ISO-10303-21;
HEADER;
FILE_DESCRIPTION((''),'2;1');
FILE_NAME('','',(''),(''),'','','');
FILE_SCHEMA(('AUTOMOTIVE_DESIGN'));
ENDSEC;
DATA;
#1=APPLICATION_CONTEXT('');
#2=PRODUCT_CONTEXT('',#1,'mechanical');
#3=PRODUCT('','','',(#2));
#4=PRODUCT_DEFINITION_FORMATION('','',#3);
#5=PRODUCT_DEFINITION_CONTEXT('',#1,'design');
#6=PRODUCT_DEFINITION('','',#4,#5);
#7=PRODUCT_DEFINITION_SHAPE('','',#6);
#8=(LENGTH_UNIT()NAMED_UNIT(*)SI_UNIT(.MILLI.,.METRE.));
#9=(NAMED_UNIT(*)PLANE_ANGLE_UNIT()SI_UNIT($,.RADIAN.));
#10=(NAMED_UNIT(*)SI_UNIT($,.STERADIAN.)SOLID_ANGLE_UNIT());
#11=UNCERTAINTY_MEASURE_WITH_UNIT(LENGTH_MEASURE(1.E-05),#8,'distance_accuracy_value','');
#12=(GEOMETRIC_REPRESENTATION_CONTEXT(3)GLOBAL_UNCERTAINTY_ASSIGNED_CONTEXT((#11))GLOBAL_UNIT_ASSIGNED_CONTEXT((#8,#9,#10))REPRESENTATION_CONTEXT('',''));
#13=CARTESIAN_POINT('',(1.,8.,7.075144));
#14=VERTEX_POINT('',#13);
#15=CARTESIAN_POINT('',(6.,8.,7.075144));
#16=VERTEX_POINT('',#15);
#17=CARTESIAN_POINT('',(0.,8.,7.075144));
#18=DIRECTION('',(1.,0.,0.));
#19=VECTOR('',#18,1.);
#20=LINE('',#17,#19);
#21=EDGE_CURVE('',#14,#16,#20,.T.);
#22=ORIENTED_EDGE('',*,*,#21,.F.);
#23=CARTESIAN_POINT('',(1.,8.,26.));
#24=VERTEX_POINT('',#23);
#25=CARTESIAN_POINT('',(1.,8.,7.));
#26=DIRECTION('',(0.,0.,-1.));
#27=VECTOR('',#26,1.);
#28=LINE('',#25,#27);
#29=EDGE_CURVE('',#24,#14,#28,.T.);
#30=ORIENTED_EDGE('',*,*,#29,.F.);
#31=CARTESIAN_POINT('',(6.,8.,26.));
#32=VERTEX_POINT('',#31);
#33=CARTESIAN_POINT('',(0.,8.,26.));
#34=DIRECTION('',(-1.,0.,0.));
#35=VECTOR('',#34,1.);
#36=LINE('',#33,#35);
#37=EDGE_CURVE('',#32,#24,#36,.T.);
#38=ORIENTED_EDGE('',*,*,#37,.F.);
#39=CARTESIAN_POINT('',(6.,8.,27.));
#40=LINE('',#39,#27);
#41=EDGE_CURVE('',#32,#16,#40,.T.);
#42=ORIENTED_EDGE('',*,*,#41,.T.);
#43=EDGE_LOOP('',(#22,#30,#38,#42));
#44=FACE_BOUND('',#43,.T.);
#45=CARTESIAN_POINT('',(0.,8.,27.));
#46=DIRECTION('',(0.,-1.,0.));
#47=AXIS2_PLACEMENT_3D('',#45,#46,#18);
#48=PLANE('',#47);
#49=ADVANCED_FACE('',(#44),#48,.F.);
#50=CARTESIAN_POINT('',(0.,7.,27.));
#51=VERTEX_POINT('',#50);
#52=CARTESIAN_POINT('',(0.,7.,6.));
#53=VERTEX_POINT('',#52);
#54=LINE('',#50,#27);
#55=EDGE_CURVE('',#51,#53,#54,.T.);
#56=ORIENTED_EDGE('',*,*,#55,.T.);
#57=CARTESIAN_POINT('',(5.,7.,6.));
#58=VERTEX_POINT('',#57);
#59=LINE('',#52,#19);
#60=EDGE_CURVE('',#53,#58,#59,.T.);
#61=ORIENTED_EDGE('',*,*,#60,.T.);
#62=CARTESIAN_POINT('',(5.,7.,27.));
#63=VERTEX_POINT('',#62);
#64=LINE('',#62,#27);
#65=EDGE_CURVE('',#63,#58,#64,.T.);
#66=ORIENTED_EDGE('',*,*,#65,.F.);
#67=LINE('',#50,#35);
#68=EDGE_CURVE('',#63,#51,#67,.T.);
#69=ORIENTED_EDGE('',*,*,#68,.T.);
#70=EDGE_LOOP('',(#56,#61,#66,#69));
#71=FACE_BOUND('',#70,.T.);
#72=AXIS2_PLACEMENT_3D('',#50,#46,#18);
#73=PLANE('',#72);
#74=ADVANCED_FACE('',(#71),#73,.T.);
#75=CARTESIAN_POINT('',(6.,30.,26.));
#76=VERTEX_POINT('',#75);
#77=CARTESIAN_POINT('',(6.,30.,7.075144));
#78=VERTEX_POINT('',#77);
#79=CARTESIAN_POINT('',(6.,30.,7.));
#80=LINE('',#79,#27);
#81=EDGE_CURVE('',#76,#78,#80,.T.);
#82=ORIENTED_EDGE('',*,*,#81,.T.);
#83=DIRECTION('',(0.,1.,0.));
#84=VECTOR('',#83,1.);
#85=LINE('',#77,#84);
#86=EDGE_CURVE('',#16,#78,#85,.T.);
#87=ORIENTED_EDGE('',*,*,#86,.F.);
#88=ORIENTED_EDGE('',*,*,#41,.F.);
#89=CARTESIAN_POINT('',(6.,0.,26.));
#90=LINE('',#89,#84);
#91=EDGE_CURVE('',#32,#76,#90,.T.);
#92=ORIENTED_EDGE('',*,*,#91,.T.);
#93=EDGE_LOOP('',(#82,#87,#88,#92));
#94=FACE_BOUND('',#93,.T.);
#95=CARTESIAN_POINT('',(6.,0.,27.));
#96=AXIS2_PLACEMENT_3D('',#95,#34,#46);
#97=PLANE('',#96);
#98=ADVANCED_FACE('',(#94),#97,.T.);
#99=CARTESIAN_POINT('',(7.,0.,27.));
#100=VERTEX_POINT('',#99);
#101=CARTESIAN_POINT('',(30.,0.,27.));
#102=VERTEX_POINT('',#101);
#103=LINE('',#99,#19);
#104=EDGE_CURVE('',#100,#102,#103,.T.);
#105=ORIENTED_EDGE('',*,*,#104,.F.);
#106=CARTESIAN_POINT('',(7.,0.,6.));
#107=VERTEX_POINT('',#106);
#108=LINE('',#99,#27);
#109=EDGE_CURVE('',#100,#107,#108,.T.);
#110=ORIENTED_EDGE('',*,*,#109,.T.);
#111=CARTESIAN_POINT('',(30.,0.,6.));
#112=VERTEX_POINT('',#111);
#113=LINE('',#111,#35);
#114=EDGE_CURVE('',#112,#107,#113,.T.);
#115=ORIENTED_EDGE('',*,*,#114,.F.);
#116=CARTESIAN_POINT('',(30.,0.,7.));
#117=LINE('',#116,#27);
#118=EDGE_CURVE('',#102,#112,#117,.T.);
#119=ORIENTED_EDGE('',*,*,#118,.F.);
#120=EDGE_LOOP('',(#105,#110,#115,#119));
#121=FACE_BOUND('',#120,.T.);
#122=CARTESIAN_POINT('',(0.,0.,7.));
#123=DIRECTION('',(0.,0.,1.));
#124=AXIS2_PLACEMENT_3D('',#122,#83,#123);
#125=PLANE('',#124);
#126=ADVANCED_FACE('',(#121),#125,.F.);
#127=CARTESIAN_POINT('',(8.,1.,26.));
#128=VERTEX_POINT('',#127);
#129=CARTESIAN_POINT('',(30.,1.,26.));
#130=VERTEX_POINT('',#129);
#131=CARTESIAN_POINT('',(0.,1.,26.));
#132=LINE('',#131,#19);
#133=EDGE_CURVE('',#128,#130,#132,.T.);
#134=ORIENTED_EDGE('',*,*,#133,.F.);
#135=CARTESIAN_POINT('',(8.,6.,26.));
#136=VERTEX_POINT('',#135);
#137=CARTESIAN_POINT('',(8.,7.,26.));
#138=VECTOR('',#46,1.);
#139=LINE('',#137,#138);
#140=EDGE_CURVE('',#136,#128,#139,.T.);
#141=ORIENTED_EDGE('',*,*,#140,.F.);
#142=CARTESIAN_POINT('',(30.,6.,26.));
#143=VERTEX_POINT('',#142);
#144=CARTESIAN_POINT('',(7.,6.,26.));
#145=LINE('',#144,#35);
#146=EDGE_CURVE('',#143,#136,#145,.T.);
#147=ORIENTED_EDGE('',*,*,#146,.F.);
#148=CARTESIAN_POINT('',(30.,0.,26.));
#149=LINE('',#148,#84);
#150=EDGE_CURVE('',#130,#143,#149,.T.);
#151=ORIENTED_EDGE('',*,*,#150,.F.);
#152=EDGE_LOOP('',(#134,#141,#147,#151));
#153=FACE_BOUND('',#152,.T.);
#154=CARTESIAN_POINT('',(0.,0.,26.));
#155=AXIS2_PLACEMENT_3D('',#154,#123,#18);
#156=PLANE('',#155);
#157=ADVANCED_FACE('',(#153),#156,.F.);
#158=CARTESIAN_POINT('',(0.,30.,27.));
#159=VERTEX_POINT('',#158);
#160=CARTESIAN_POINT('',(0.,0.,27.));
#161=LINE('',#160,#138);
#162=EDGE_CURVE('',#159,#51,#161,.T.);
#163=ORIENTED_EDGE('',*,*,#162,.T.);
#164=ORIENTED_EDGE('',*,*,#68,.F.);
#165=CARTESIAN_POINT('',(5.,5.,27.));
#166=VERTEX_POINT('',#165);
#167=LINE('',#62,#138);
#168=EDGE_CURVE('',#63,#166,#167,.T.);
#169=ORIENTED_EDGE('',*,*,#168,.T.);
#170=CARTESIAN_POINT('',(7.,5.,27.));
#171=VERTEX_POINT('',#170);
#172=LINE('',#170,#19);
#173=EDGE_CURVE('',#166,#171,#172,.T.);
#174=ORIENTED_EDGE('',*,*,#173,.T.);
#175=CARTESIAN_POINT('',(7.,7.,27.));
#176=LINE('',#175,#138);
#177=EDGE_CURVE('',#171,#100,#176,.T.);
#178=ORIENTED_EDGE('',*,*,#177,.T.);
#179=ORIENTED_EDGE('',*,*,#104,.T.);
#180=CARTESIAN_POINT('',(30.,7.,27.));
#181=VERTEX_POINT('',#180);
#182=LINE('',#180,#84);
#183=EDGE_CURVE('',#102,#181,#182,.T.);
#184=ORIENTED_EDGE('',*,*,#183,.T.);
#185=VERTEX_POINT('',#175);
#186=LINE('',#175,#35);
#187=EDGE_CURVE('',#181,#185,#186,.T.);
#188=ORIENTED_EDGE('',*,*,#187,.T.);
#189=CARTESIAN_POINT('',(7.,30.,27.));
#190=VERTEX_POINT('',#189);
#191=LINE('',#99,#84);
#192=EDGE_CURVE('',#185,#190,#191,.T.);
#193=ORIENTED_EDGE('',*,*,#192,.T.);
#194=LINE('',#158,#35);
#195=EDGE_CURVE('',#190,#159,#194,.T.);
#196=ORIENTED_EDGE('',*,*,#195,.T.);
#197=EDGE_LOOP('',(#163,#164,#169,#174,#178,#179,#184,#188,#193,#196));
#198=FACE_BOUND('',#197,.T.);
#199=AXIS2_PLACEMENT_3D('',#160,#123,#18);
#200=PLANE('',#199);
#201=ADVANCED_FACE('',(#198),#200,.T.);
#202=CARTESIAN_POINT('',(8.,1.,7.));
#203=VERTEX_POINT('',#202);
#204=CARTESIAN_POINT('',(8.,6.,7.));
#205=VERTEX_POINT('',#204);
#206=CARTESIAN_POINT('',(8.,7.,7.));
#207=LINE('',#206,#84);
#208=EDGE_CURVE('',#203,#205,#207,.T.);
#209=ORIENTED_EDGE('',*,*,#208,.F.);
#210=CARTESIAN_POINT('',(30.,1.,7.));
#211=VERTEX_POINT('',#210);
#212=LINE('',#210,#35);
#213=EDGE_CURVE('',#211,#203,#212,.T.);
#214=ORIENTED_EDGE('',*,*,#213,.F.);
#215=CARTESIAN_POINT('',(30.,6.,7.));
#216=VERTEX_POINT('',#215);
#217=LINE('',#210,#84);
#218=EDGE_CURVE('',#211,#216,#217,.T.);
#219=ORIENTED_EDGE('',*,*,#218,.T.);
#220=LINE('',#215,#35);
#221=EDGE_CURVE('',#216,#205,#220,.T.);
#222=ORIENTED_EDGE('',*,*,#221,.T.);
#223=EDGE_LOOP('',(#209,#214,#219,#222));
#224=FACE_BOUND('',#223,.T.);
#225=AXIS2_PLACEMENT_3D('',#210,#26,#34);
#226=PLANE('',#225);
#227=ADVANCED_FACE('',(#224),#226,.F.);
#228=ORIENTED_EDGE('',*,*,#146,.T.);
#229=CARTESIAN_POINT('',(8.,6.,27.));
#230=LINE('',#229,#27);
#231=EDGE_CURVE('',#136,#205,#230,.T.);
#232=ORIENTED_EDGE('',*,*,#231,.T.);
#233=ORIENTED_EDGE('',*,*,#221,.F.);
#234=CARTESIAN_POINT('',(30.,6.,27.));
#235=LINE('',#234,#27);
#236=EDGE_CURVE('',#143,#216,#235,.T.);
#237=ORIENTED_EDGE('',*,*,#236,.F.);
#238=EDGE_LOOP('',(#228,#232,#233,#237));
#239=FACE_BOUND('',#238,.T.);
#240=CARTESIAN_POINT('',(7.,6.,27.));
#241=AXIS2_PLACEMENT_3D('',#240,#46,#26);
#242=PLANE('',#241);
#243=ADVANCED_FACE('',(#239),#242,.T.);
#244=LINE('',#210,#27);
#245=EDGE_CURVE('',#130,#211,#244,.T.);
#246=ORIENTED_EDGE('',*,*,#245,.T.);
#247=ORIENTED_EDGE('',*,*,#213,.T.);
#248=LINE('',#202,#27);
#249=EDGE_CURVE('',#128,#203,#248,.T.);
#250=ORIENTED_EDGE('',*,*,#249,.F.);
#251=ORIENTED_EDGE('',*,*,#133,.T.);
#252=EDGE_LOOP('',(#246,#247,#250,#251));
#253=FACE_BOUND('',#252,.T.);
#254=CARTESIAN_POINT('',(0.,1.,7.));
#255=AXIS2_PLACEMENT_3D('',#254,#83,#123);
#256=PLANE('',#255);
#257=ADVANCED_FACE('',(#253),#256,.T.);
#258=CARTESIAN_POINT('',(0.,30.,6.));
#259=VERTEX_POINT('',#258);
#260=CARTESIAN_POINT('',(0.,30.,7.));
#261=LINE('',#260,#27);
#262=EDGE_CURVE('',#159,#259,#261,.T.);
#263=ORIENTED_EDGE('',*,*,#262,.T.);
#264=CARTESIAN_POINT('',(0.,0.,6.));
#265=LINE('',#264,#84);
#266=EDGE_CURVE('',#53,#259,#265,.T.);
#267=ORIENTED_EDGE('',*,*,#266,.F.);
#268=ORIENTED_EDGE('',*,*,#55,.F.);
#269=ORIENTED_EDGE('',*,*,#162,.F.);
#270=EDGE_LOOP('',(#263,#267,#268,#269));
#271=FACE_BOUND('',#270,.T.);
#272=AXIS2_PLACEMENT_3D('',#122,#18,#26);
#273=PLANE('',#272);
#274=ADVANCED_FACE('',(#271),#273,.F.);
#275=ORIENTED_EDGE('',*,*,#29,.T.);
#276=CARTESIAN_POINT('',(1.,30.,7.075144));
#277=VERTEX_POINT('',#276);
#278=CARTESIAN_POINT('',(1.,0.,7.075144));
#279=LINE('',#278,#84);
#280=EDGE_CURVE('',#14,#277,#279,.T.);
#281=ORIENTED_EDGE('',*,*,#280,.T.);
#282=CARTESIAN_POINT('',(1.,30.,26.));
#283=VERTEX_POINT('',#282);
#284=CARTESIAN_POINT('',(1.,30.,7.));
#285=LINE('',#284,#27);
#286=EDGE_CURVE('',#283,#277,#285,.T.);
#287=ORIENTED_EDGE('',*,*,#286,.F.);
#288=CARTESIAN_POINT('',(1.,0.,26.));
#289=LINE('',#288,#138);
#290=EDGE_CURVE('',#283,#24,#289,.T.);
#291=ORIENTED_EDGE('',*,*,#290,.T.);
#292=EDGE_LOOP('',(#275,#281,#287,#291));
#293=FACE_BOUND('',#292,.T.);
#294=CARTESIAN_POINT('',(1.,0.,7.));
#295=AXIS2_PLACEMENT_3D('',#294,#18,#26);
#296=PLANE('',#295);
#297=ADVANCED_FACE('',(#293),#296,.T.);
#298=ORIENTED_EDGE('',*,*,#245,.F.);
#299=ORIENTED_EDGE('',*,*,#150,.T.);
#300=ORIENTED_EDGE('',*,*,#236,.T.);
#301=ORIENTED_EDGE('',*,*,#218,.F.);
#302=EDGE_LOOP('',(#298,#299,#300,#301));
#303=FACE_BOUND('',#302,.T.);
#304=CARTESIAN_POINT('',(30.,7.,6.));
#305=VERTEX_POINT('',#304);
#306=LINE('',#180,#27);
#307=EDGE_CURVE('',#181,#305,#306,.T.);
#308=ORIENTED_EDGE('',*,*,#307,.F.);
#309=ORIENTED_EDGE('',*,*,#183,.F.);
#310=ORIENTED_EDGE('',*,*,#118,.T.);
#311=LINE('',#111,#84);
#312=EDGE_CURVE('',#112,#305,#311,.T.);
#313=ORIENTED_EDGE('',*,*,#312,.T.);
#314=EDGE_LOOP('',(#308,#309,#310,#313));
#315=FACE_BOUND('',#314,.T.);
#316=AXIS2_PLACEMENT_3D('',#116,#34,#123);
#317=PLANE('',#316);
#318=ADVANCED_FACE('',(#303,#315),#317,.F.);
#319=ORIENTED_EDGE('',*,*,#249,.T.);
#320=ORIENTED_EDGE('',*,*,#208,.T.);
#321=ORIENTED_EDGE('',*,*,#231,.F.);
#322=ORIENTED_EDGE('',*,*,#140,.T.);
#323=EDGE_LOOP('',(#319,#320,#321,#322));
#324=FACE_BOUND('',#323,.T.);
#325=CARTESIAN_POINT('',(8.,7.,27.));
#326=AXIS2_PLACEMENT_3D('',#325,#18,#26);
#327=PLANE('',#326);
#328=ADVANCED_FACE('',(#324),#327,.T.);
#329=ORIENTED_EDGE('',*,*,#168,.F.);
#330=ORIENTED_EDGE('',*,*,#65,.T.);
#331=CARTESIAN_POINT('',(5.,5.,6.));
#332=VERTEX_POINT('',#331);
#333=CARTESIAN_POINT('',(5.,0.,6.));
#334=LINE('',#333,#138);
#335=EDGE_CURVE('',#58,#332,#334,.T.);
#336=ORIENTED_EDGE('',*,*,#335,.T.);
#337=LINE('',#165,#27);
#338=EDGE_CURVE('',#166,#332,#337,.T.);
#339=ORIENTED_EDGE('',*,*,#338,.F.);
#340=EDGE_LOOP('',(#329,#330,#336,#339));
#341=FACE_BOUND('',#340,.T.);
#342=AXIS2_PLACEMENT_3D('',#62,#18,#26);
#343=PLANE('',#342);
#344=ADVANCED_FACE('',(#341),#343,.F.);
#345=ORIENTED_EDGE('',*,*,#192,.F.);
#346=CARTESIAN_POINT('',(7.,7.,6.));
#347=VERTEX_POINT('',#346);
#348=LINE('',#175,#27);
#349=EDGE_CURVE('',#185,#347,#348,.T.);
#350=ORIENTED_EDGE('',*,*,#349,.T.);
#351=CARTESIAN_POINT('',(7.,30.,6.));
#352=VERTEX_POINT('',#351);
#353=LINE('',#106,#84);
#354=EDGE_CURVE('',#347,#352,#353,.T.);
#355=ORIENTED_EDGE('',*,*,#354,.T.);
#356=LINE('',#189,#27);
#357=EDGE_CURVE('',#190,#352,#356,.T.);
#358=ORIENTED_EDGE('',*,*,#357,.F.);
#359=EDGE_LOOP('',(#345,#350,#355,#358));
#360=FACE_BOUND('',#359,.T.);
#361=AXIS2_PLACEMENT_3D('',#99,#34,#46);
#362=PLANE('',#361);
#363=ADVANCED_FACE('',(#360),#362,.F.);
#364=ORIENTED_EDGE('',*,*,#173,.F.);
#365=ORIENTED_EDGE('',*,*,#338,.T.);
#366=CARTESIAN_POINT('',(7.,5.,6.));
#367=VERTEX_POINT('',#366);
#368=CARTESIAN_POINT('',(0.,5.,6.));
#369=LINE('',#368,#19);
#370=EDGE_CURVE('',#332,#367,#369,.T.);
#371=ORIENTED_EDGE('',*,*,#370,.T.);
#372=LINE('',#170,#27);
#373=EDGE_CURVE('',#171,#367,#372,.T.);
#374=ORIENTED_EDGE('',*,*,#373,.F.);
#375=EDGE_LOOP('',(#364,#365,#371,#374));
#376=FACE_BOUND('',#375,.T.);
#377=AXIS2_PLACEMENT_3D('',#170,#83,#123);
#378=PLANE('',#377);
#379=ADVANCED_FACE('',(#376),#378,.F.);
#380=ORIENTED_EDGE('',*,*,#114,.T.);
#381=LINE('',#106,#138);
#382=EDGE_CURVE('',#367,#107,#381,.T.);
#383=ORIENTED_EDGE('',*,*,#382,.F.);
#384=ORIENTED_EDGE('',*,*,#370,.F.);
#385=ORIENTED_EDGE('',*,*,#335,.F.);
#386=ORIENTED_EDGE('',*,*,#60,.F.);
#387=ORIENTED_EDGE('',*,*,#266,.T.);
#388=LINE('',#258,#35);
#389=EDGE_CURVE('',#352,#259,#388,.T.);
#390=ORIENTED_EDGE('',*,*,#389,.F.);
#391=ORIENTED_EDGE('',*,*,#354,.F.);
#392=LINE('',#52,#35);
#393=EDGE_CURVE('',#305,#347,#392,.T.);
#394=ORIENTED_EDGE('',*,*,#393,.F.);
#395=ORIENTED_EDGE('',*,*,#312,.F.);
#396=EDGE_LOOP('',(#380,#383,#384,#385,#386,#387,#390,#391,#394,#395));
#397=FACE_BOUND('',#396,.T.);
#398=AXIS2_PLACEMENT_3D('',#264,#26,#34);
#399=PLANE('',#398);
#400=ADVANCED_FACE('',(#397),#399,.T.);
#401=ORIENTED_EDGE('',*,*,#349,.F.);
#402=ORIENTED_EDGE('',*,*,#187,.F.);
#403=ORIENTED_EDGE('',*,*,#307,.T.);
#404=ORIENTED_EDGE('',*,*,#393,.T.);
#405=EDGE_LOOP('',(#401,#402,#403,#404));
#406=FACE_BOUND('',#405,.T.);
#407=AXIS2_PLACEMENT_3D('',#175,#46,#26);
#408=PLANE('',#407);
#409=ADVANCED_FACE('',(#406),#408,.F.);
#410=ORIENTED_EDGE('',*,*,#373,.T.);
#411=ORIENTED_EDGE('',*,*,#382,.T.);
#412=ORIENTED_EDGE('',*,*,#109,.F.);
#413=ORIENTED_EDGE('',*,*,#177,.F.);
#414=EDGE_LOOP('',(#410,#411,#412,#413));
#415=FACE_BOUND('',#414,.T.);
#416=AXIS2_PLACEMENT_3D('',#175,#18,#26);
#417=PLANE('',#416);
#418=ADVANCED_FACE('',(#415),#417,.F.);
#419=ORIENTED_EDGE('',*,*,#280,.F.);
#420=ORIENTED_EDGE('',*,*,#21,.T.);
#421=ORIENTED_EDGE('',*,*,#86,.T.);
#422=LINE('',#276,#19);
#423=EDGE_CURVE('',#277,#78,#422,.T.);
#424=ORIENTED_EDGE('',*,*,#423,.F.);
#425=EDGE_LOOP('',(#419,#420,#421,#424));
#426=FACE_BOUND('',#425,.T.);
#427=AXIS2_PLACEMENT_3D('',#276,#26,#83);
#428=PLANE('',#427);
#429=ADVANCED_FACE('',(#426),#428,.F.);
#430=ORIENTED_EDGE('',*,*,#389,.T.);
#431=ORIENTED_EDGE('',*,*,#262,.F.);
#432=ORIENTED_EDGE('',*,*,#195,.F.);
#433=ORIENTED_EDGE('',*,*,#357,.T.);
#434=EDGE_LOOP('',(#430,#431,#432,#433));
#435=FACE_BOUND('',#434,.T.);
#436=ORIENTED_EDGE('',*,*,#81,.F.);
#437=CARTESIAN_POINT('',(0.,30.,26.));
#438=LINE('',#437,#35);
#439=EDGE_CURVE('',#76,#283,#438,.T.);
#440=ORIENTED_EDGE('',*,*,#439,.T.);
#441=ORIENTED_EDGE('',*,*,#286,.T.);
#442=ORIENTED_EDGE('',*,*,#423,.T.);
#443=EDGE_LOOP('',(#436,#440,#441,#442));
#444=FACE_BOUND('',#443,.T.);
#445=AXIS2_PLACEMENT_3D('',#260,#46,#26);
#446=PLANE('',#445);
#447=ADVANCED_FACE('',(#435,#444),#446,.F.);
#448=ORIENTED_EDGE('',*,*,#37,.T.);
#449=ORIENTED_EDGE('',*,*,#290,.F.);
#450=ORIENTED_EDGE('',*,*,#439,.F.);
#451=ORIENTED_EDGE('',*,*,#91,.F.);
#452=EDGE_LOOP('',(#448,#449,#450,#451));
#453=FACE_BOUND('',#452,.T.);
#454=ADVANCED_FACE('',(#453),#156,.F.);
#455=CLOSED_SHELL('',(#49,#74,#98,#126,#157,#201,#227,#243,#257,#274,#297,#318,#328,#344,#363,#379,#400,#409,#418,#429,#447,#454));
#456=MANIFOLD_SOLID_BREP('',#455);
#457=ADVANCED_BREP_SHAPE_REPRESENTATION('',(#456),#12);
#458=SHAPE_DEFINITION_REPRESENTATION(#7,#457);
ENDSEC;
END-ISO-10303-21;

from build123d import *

# Parameters (mm, degrees)
SKETCH1_W           = 30
SKETCH1_H           = 30
BOSS_EXTRUDE1_DEPTH = 7
SKETCH2_W           = 7
SKETCH2_H           = 23
BOSS_EXTRUDE4_DEPTH = 20
SKETCH4_W           = 2
SKETCH4_H           = 2
BOSS_EXTRUDE6_DEPTH = 20
SKETCH5_W           = 23
SKETCH5_H           = 7
BOSS_EXTRUDE7_DEPTH = 20
SHELL2_START        = 8
SHELL2_DEPTH        = 22
SHELL2_START_2      = 1
SHELL2_2_DEPTH      = 5
SHELL2_START_3      = 6
SHELL2_3_OUTLINE_W  = 29
SHELL2_3_OUTLINE_H  = 5
SHELL2_3_DEPTH      = 2
SKETCH7_W           = 23
SKETCH7_H           = 1
BOSS_EXTRUDE8_DEPTH = 5
SKETCH9_W           = 1.075143629
SKETCH9_H           = 23
BOSS_EXTRUDE9_DEPTH = 5
SKETCH10_W          = 30
SKETCH10_H          = 30
CUT_EXTRUDE1_DEPTH  = 6
CUT_EXTRUDE2_DEPTH  = 6
SKETCH12_W          = 23
SKETCH12_H          = 23
CUT_EXTRUDE3_DEPTH  = 6


# Read off the part's stored shape, not the designer's step: Shell2
with BuildPart() as part:
    # Sketch1 → Boss-Extrude1 (new body)
    with BuildSketch(Plane.XY):
        with Locations((15, 15)):
            Rectangle(SKETCH1_W, SKETCH1_H)
    extrude(amount=BOSS_EXTRUDE1_DEPTH)

    # Sketch2 → Boss-Extrude4 (add)
    with BuildSketch(Plane.XY.offset(7)):
        with Locations((3.5, 18.5)):
            Rectangle(SKETCH2_W, SKETCH2_H)
    extrude(amount=BOSS_EXTRUDE4_DEPTH)

    # Sketch4 → Boss-Extrude6 (add)
    with BuildSketch(Plane.XY.offset(7)):
        with Locations((6, 6)):
            Rectangle(SKETCH4_W, SKETCH4_H)
    extrude(amount=BOSS_EXTRUDE6_DEPTH)

    # Sketch5 → Boss-Extrude7 (add)
    with BuildSketch(Plane.XY.offset(7)):
        with Locations((18.5, 3.5)):
            Rectangle(SKETCH5_W, SKETCH5_H)
    extrude(amount=BOSS_EXTRUDE7_DEPTH)

    # Shell2 outline → Shell2 (cut)
    with BuildSketch(Plane(origin=(0, 0, 0), x_dir=(1, 0, 0), z_dir=(0, 1, 0)).offset(SHELL2_START)):
        Polygon((6, -6), (30, -6), (30, -1), (1, -1), (1, -26), (6, -26), align=None)
    extrude(amount=SHELL2_DEPTH, mode=Mode.SUBTRACT)

    # Shell2 2 outline → Shell2 2 (cut)
    with BuildSketch(Plane(origin=(0, 0, 0), x_dir=(1, 0, 0), z_dir=(0, 1, 0)).offset(SHELL2_START_2)):
        Polygon((8, -6), (8, -26), (30, -26), (30, -1), (1, -1), (1, -6), align=None)
    extrude(amount=SHELL2_2_DEPTH, mode=Mode.SUBTRACT)

    # Shell2 3 outline → Shell2 3 (cut)
    with BuildSketch(Plane(origin=(0, 0, 0), x_dir=(1, 0, 0), z_dir=(0, 1, 0)).offset(SHELL2_START_3)):
        with Locations((15.5, -3.5)):
            Rectangle(SHELL2_3_OUTLINE_W, SHELL2_3_OUTLINE_H)
    extrude(amount=SHELL2_3_DEPTH, mode=Mode.SUBTRACT)

    # Sketch7 → Boss-Extrude8 (add)
    with BuildSketch(Plane.XZ.offset(-6)):
        with Locations((18.5, 6.5)):
            Rectangle(SKETCH7_W, SKETCH7_H)
    extrude(amount=BOSS_EXTRUDE8_DEPTH)

    # Sketch9 → Boss-Extrude9 (add)
    with BuildSketch(Plane.ZY.offset(-6)):
        with Locations((6.537571814, 18.5)):
            Rectangle(SKETCH9_W, SKETCH9_H)
    extrude(amount=BOSS_EXTRUDE9_DEPTH)

    # Sketch10 → Cut-Extrude1 (cut)
    with BuildSketch(Plane(origin=(0, 0, 0), x_dir=(-1, 0, 0), z_dir=(0, 0, -1))):
        with Locations((-15, 15)):
            Rectangle(SKETCH10_W, SKETCH10_H)
    extrude(amount=-CUT_EXTRUDE1_DEPTH, mode=Mode.SUBTRACT)

    # Sketch11 → Cut-Extrude2 (cut)
    with BuildSketch(Plane.XY.offset(7)):
        Polygon((7, 0), (7, 5), (5, 5), (5, 7), (0, 7), (0, 0), align=None)
    extrude(amount=-CUT_EXTRUDE2_DEPTH, mode=Mode.SUBTRACT)

    # Sketch12 → Cut-Extrude3 (cut)
    with BuildSketch(Plane.XY.offset(7)):
        with Locations((18.5, 18.5)):
            Rectangle(SKETCH12_W, SKETCH12_H)
    extrude(amount=-CUT_EXTRUDE3_DEPTH, mode=Mode.SUBTRACT)


solid = part.part
